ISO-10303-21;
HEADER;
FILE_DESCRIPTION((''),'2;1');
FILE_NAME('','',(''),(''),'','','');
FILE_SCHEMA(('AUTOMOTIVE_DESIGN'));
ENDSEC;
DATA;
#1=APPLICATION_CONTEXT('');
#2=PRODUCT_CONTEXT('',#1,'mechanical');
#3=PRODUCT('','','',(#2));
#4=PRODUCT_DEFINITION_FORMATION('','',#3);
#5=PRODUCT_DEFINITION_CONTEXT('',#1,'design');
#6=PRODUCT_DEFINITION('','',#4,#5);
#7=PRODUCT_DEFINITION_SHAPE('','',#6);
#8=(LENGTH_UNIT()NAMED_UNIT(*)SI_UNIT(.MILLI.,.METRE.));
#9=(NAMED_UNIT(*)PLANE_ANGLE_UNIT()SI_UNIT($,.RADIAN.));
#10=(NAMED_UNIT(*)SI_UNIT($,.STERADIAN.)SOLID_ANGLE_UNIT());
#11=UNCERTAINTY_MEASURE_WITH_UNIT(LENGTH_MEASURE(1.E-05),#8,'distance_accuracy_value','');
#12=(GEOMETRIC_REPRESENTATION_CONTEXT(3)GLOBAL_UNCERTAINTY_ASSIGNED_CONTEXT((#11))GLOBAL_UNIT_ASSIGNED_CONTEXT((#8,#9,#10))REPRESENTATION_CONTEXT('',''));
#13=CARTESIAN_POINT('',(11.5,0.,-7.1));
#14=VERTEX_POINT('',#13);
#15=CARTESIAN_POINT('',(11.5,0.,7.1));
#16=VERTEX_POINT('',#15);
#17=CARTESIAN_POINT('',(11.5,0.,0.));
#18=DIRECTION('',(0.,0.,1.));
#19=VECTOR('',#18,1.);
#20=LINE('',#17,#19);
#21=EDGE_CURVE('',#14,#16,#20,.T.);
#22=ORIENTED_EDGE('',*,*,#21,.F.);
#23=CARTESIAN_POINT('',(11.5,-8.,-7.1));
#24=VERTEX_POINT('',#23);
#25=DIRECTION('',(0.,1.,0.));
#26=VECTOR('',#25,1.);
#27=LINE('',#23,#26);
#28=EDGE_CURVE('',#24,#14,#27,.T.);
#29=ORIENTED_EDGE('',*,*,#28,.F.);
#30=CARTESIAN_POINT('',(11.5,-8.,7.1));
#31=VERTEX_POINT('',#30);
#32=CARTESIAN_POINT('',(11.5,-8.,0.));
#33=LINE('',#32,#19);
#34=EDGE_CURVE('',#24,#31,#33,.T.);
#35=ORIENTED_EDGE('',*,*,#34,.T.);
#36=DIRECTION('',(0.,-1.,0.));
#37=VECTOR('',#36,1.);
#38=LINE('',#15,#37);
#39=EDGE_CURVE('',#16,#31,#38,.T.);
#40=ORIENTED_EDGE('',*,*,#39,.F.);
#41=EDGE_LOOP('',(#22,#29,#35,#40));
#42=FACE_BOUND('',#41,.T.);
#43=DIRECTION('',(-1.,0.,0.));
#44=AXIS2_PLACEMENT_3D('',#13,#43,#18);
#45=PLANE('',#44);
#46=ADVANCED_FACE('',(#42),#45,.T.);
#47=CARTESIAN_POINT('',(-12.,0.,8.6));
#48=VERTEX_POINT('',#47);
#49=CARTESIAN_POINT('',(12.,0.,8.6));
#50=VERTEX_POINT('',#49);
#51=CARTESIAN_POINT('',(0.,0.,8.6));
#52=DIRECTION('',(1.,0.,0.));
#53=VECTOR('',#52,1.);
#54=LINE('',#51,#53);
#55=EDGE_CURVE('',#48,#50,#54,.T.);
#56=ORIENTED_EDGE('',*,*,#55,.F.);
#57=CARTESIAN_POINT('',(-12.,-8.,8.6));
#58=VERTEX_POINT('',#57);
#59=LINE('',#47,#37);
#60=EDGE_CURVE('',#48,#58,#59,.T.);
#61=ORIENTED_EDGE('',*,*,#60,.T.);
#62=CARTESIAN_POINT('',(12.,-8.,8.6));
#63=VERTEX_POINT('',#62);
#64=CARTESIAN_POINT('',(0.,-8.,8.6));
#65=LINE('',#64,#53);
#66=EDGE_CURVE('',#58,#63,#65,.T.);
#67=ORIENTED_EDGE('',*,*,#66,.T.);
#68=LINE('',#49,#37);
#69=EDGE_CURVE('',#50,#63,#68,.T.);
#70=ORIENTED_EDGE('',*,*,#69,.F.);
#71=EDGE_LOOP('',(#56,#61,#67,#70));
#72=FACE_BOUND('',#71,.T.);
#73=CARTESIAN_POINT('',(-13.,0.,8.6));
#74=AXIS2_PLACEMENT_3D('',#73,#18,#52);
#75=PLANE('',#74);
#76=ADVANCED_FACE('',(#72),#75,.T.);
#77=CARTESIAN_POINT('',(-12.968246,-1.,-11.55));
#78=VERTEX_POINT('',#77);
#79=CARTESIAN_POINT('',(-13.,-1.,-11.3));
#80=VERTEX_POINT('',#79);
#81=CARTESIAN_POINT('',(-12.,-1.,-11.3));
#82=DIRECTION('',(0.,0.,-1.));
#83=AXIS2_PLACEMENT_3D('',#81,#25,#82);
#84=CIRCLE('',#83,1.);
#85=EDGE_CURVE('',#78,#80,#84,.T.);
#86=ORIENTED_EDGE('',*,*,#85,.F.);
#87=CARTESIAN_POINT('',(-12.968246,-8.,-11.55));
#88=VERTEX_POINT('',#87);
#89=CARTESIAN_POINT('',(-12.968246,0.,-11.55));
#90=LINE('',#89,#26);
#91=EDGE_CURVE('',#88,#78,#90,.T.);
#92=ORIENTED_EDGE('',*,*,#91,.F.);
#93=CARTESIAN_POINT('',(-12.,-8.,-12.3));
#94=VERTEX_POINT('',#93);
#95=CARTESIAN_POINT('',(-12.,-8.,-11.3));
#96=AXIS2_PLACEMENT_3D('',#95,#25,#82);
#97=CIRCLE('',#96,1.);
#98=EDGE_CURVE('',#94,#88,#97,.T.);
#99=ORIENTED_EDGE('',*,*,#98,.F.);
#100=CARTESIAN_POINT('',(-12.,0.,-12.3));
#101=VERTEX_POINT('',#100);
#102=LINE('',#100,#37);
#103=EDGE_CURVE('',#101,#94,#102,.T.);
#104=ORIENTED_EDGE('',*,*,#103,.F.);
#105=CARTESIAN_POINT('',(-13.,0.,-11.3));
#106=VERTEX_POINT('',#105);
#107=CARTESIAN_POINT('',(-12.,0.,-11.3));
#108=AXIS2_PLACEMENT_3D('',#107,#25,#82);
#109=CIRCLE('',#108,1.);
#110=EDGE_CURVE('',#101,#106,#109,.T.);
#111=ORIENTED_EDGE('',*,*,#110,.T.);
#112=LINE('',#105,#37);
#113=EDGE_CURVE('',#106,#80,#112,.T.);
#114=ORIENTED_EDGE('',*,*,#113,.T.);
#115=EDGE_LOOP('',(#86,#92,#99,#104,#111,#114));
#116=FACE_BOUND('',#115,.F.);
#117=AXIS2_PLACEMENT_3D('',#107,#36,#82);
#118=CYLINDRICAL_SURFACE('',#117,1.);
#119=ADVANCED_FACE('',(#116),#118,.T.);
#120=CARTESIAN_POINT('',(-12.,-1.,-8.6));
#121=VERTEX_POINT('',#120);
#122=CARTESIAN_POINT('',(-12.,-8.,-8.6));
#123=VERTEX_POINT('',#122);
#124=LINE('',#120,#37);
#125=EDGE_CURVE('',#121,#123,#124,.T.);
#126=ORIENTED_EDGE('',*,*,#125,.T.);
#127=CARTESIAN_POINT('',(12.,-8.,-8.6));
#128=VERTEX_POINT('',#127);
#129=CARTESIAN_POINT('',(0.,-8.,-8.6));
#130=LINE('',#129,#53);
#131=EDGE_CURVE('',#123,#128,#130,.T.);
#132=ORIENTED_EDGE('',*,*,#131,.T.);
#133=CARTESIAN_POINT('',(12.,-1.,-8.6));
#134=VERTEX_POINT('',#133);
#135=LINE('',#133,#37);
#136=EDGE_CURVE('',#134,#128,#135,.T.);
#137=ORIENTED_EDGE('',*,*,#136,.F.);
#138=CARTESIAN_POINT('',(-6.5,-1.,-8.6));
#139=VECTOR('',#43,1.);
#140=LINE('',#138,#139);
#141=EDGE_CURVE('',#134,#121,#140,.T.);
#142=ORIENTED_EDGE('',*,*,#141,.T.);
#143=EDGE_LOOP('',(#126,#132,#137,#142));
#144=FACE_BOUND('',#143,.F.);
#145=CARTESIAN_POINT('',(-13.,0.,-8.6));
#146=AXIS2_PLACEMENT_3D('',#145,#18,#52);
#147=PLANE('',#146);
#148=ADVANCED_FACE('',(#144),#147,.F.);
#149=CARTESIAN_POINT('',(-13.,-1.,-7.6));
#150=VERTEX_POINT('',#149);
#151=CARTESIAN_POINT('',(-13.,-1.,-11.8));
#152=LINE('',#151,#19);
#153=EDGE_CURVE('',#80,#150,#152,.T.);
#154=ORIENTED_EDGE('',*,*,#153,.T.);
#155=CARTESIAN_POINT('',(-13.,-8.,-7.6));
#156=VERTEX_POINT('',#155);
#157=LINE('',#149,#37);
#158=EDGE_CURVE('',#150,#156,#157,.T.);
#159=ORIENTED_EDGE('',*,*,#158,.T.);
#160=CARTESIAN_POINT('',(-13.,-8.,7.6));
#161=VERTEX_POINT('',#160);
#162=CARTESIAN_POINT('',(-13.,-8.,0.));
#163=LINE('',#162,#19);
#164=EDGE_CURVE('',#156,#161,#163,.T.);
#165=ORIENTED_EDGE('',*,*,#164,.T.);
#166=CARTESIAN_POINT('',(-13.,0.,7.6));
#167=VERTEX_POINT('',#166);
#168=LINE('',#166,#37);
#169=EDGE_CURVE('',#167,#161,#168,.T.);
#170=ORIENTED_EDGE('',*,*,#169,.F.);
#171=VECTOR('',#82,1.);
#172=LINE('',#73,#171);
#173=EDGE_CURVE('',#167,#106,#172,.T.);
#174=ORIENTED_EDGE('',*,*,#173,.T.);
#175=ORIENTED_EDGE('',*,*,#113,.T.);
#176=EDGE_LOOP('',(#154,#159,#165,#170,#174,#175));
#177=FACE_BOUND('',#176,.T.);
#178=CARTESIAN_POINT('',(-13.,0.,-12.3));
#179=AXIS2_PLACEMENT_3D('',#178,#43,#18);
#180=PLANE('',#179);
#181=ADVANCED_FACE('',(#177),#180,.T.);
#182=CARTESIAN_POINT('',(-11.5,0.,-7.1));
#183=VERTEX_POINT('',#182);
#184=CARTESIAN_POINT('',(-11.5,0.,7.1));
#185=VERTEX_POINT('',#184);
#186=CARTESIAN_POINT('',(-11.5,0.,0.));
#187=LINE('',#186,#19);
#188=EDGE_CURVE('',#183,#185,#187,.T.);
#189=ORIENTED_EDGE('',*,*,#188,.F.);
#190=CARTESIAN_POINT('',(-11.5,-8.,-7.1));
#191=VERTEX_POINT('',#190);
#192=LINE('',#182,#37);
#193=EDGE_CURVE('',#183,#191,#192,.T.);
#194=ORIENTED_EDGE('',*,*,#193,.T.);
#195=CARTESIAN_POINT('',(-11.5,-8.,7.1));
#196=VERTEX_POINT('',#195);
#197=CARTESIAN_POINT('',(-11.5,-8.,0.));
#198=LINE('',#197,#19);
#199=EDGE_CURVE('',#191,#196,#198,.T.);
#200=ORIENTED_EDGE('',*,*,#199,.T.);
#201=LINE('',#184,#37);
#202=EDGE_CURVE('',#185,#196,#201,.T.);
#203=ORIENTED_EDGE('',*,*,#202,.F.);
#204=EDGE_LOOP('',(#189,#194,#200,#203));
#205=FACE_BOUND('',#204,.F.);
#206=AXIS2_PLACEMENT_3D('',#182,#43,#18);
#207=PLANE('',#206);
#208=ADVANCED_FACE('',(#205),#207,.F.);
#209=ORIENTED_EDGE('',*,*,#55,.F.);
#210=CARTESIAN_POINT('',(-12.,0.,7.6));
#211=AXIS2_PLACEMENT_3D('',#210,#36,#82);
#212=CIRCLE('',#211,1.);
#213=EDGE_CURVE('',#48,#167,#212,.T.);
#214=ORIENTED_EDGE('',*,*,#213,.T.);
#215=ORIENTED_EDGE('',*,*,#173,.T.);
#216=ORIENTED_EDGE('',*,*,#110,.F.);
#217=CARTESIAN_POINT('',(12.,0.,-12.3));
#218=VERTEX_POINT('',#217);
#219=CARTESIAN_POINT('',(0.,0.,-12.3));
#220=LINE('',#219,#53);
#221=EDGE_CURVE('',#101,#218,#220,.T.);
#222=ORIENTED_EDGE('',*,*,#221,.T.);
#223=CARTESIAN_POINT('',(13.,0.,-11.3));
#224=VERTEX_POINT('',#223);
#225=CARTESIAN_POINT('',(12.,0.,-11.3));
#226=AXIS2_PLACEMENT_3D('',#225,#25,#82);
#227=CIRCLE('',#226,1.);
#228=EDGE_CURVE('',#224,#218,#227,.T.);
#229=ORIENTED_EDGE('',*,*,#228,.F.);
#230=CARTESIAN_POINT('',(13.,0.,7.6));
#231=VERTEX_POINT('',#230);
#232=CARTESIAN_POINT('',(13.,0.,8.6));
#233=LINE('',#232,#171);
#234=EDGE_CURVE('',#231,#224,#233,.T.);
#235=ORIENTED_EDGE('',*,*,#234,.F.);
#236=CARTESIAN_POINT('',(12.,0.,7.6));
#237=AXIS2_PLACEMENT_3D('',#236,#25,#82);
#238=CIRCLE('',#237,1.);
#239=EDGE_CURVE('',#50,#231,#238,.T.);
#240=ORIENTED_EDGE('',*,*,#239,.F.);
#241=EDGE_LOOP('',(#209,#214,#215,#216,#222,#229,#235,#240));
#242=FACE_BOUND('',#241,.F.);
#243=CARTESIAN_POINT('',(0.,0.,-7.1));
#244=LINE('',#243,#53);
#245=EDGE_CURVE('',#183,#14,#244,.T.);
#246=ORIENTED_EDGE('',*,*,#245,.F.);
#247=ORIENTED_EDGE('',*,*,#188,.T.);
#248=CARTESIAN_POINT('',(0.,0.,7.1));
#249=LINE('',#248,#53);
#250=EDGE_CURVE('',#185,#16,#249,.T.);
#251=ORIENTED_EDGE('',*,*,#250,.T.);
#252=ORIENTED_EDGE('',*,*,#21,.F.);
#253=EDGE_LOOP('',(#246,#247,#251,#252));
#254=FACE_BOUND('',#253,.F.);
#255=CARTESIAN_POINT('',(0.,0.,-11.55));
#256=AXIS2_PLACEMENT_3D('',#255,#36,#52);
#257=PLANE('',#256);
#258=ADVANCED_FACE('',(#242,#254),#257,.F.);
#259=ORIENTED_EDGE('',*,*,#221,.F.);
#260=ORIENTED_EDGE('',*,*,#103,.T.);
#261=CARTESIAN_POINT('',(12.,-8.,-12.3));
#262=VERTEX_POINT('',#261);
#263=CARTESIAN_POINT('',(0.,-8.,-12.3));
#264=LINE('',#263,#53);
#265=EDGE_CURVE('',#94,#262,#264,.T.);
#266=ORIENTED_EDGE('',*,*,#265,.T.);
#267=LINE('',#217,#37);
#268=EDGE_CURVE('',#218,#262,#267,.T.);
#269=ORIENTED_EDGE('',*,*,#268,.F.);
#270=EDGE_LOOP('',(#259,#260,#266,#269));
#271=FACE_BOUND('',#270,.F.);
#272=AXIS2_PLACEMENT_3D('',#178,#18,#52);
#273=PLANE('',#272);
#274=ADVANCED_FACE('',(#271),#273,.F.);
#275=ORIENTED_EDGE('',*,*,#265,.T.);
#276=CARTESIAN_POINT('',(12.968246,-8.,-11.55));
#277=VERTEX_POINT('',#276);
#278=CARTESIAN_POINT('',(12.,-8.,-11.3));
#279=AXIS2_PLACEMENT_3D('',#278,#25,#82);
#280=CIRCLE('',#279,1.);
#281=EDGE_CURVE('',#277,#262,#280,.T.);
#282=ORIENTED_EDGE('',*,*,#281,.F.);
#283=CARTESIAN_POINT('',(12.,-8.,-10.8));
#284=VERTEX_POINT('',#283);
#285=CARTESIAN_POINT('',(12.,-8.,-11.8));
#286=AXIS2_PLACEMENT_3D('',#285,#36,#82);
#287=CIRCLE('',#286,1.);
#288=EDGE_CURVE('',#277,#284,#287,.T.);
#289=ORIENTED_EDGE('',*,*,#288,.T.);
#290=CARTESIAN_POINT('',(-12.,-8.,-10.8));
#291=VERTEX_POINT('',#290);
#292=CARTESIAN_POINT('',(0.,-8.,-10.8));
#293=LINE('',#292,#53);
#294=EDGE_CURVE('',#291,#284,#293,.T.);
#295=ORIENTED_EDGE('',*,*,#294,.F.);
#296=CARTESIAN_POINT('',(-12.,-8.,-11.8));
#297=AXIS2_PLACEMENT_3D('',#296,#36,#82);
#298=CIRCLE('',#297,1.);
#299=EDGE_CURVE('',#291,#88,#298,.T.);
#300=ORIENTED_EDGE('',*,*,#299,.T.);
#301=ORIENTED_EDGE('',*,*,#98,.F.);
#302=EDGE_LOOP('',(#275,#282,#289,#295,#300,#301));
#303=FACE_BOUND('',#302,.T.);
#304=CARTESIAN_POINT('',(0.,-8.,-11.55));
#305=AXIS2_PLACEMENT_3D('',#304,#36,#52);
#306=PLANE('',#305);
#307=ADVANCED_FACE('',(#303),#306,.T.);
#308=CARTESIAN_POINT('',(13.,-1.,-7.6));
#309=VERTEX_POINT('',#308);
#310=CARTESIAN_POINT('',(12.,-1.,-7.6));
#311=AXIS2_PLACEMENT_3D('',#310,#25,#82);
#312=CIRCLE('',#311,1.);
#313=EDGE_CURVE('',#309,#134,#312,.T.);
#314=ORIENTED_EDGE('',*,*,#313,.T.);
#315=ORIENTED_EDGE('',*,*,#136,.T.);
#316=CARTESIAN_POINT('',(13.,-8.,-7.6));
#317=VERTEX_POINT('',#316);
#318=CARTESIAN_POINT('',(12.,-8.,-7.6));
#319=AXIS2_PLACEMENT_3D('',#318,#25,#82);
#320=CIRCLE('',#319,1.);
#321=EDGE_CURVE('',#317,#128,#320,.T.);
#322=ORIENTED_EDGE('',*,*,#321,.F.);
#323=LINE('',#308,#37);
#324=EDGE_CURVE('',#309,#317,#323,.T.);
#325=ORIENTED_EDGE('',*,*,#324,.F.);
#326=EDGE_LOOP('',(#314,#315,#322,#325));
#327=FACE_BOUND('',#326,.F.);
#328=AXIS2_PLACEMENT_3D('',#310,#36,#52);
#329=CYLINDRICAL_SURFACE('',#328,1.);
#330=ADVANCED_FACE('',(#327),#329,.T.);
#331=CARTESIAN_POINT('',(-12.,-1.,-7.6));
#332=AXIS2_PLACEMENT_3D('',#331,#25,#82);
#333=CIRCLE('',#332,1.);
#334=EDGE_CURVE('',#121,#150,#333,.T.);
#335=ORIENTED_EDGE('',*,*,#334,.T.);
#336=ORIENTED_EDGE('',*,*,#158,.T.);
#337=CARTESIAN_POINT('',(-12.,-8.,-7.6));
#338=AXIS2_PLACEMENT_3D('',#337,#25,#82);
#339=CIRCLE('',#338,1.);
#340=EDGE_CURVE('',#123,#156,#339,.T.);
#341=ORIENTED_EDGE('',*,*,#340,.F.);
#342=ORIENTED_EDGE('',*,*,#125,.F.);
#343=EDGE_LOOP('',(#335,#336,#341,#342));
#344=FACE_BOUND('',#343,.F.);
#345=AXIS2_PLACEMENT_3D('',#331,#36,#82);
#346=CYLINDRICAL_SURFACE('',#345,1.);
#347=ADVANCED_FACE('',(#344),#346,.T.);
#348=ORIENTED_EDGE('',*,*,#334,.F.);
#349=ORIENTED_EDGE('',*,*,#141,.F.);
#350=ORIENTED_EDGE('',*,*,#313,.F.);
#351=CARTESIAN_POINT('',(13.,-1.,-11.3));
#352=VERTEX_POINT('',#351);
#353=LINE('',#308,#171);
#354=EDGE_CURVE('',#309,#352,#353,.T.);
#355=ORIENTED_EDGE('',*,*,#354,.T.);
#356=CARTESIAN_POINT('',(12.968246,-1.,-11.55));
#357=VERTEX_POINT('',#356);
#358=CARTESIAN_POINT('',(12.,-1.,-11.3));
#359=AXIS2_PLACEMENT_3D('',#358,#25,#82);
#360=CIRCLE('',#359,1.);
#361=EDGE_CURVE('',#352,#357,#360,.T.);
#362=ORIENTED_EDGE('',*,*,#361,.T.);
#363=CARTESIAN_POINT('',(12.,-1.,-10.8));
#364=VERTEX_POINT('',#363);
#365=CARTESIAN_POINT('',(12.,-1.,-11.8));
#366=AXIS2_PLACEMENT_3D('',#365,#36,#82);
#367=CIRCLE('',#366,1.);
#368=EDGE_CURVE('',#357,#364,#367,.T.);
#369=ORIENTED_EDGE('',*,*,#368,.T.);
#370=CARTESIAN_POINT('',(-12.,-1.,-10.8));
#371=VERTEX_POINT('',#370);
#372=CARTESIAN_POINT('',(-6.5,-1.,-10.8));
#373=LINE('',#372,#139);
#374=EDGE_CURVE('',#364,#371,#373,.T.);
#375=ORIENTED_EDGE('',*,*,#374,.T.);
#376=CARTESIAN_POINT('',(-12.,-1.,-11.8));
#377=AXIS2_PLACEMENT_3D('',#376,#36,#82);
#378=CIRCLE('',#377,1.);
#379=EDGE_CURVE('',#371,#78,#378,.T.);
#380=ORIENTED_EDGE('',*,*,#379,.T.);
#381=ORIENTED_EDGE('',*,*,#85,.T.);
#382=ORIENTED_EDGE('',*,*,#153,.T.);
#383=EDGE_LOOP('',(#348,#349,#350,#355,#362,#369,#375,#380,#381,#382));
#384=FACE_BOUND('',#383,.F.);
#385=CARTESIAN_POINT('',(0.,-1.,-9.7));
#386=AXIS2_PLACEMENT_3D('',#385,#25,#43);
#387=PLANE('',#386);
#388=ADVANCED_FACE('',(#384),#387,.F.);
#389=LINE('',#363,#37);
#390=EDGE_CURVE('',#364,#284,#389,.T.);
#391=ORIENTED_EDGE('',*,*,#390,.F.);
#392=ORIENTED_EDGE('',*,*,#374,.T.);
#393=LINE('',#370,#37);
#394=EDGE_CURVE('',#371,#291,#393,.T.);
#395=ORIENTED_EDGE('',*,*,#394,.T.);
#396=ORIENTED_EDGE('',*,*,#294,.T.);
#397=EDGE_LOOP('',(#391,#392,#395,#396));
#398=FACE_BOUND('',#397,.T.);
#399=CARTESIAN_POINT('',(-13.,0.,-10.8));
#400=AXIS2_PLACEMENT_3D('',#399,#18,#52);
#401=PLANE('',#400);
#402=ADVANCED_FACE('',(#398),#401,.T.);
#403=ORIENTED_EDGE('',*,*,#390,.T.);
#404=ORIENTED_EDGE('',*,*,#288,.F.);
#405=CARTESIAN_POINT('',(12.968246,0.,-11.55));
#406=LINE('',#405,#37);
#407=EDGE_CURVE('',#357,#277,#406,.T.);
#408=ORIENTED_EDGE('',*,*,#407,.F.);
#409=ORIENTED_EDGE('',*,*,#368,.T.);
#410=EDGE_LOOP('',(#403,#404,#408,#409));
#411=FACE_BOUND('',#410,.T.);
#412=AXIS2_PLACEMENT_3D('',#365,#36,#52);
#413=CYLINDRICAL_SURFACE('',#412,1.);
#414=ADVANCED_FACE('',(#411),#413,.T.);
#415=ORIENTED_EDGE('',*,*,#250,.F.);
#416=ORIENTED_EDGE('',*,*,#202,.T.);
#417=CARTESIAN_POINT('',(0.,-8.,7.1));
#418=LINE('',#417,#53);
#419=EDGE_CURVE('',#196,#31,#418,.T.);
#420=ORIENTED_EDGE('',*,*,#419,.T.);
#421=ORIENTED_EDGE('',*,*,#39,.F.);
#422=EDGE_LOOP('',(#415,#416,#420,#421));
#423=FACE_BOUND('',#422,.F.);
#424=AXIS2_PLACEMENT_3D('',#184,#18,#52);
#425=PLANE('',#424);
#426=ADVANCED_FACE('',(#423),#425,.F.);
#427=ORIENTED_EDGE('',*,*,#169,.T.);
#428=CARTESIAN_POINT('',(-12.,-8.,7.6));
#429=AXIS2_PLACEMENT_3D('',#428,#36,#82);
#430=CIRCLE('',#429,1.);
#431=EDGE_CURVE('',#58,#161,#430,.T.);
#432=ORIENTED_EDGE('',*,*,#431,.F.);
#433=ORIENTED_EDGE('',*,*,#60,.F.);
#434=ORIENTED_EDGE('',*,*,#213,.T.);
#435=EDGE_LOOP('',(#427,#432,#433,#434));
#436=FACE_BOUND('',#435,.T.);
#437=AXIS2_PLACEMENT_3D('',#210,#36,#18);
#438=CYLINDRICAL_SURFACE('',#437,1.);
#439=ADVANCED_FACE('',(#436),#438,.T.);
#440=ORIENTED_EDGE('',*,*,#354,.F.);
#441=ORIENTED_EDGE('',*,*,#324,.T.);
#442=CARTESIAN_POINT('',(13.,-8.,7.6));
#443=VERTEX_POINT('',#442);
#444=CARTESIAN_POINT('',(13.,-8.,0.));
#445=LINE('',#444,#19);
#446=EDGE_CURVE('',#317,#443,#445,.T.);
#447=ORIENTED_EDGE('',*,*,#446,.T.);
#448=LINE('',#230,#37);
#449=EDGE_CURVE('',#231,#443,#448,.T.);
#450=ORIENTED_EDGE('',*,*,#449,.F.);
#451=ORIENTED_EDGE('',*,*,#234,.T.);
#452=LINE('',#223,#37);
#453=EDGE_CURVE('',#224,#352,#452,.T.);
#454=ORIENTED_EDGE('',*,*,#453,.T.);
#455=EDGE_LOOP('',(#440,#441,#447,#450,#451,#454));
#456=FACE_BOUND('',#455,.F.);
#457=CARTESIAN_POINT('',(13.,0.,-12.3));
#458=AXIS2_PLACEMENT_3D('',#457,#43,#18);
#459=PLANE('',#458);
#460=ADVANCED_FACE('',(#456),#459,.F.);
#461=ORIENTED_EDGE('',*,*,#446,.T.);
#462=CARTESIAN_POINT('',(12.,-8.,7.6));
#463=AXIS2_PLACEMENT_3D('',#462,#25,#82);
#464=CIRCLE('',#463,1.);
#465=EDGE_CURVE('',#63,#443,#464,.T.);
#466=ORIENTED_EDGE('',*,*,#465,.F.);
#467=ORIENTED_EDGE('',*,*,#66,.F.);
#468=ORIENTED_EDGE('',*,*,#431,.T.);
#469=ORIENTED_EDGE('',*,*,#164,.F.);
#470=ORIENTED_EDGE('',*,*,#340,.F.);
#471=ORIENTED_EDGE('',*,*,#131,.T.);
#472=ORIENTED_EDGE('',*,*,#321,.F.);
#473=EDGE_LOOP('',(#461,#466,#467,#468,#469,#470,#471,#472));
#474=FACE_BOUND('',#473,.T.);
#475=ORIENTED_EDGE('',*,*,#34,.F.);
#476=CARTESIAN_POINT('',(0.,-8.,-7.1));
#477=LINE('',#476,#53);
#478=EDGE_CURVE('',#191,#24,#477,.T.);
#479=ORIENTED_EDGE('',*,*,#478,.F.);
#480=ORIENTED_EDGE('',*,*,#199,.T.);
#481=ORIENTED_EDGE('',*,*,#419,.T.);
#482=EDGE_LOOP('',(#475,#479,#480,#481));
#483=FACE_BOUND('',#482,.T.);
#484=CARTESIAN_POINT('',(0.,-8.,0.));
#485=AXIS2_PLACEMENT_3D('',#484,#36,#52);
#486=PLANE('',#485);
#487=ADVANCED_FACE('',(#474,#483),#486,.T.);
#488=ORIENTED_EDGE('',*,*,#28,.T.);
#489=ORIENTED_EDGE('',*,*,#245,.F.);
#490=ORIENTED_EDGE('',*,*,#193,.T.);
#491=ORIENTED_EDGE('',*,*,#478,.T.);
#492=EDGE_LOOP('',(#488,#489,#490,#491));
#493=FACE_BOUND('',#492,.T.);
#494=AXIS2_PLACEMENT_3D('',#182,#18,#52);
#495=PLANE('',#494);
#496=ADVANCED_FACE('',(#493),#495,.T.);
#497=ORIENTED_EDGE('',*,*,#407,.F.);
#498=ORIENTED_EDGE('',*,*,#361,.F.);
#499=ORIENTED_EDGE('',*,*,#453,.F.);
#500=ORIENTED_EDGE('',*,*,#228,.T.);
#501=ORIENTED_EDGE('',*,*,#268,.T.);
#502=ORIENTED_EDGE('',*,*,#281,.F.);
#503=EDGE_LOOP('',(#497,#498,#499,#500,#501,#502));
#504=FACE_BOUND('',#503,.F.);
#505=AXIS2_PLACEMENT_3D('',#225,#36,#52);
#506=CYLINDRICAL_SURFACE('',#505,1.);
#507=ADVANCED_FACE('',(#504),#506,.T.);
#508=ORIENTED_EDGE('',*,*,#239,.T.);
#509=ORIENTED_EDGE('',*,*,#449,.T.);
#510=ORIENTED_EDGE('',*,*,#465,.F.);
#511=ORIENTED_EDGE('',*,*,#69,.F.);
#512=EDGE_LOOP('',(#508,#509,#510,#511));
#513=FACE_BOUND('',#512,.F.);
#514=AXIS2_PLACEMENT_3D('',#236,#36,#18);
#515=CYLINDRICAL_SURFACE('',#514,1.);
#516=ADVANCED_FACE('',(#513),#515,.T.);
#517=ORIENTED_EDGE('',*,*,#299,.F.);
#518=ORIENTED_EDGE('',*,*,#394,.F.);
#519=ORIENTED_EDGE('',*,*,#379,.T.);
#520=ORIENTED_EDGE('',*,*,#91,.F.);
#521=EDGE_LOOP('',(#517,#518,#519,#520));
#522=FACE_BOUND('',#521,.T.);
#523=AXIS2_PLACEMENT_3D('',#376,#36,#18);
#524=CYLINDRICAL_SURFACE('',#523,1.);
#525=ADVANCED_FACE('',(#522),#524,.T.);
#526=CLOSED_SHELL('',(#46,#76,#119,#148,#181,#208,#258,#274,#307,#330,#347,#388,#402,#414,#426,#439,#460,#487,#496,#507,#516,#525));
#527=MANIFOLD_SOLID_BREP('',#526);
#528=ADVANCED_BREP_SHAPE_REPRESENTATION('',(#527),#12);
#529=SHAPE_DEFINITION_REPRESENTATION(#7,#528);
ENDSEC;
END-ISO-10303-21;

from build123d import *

# Parameters (mm, degrees)
F0_W     = 26
F0_H     = 17.2
F0_W_2   = 23
F0_H_2   = 14.2
F1_DEPTH = 8
F0_H_3   = 1.5
F2_W     = 26
F2_H     = 5.2
F3_DEPTH = 1
F4_F1_R  = 1
F4_F2_R  = 1
F4_F3_R  = 1
F4_F4_R  = 1
F4_F5_R  = 1
F4_F6_R  = 1
F4_F7_R  = 1
F4_F8_R  = 1


with BuildPart() as f1:
    # F0 (on Front) → F1 (new body)
    with BuildSketch(Plane.XZ):
        Rectangle(F0_W, F0_H)
        Rectangle(F0_W_2, F0_H_2, mode=Mode.SUBTRACT)
    extrude(amount=F1_DEPTH)



with BuildPart() as f1b:
    # F0 (on Front) → F1, piece 2 (new body)
    with BuildSketch(Plane.XZ):
        with Locations((0, -11.55)):
            Rectangle(F0_W, F0_H_3)
    extrude(amount=F1_DEPTH)


with BuildPart() as f1_1:
    add(f1.part)

    add(f1b.part)  # F3 merges F1b
    # F2 (on face) → F3 (join)
    with BuildSketch(Plane(origin=(0, 0, 0), x_dir=(-1, 0, 0), z_dir=(0, 1, 0))):
        with Locations((0, -9.7)):
            Rectangle(F2_W, F2_H)
    extrude(amount=-F3_DEPTH)

    # F4: fillet of radius 1 on 8 edges, made by hand

    # F4_f1
    f4_f1_edges = [f1_1.edges().sort_by_distance(p)[0] for p in [
        (13, -4.5, -8.6),
    ]]
    fillet(f4_f1_edges, radius=F4_F1_R)

    # F4_f2
    f4_f2_edges = [f1_1.edges().sort_by_distance(p)[0] for p in [
        (-13, -4.5, -8.6),
    ]]
    fillet(f4_f2_edges, radius=F4_F2_R)

    # F4_f3
    f4_f3_edges = [f1_1.edges().sort_by_distance(p)[0] for p in [
        (-13, -4.5, -10.8),
    ]]
    fillet(f4_f3_edges, radius=F4_F3_R)

    # F4_f4
    f4_f4_edges = [f1_1.edges().sort_by_distance(p)[0] for p in [
        (13, -4.5, -10.8),
    ]]
    fillet(f4_f4_edges, radius=F4_F4_R)

    # F4_f5
    f4_f5_edges = [f1_1.edges().sort_by_distance(p)[0] for p in [
        (13, -4, 8.6),
    ]]
    fillet(f4_f5_edges, radius=F4_F5_R)

    # F4_f6
    f4_f6_edges = [f1_1.edges().sort_by_distance(p)[0] for p in [
        (-13, -4, 8.6),
    ]]
    fillet(f4_f6_edges, radius=F4_F6_R)

    # F4_f7
    f4_f7_edges = [f1_1.edges().sort_by_distance(p)[0] for p in [
        (13, -4, -12.3),
    ]]
    fillet(f4_f7_edges, radius=F4_F7_R)

    # F4_f8
    f4_f8_edges = [f1_1.edges().sort_by_distance(p)[0] for p in [
        (-13, -4, -12.3),
    ]]
    fillet(f4_f8_edges, radius=F4_F8_R)


solid = f1_1.part
